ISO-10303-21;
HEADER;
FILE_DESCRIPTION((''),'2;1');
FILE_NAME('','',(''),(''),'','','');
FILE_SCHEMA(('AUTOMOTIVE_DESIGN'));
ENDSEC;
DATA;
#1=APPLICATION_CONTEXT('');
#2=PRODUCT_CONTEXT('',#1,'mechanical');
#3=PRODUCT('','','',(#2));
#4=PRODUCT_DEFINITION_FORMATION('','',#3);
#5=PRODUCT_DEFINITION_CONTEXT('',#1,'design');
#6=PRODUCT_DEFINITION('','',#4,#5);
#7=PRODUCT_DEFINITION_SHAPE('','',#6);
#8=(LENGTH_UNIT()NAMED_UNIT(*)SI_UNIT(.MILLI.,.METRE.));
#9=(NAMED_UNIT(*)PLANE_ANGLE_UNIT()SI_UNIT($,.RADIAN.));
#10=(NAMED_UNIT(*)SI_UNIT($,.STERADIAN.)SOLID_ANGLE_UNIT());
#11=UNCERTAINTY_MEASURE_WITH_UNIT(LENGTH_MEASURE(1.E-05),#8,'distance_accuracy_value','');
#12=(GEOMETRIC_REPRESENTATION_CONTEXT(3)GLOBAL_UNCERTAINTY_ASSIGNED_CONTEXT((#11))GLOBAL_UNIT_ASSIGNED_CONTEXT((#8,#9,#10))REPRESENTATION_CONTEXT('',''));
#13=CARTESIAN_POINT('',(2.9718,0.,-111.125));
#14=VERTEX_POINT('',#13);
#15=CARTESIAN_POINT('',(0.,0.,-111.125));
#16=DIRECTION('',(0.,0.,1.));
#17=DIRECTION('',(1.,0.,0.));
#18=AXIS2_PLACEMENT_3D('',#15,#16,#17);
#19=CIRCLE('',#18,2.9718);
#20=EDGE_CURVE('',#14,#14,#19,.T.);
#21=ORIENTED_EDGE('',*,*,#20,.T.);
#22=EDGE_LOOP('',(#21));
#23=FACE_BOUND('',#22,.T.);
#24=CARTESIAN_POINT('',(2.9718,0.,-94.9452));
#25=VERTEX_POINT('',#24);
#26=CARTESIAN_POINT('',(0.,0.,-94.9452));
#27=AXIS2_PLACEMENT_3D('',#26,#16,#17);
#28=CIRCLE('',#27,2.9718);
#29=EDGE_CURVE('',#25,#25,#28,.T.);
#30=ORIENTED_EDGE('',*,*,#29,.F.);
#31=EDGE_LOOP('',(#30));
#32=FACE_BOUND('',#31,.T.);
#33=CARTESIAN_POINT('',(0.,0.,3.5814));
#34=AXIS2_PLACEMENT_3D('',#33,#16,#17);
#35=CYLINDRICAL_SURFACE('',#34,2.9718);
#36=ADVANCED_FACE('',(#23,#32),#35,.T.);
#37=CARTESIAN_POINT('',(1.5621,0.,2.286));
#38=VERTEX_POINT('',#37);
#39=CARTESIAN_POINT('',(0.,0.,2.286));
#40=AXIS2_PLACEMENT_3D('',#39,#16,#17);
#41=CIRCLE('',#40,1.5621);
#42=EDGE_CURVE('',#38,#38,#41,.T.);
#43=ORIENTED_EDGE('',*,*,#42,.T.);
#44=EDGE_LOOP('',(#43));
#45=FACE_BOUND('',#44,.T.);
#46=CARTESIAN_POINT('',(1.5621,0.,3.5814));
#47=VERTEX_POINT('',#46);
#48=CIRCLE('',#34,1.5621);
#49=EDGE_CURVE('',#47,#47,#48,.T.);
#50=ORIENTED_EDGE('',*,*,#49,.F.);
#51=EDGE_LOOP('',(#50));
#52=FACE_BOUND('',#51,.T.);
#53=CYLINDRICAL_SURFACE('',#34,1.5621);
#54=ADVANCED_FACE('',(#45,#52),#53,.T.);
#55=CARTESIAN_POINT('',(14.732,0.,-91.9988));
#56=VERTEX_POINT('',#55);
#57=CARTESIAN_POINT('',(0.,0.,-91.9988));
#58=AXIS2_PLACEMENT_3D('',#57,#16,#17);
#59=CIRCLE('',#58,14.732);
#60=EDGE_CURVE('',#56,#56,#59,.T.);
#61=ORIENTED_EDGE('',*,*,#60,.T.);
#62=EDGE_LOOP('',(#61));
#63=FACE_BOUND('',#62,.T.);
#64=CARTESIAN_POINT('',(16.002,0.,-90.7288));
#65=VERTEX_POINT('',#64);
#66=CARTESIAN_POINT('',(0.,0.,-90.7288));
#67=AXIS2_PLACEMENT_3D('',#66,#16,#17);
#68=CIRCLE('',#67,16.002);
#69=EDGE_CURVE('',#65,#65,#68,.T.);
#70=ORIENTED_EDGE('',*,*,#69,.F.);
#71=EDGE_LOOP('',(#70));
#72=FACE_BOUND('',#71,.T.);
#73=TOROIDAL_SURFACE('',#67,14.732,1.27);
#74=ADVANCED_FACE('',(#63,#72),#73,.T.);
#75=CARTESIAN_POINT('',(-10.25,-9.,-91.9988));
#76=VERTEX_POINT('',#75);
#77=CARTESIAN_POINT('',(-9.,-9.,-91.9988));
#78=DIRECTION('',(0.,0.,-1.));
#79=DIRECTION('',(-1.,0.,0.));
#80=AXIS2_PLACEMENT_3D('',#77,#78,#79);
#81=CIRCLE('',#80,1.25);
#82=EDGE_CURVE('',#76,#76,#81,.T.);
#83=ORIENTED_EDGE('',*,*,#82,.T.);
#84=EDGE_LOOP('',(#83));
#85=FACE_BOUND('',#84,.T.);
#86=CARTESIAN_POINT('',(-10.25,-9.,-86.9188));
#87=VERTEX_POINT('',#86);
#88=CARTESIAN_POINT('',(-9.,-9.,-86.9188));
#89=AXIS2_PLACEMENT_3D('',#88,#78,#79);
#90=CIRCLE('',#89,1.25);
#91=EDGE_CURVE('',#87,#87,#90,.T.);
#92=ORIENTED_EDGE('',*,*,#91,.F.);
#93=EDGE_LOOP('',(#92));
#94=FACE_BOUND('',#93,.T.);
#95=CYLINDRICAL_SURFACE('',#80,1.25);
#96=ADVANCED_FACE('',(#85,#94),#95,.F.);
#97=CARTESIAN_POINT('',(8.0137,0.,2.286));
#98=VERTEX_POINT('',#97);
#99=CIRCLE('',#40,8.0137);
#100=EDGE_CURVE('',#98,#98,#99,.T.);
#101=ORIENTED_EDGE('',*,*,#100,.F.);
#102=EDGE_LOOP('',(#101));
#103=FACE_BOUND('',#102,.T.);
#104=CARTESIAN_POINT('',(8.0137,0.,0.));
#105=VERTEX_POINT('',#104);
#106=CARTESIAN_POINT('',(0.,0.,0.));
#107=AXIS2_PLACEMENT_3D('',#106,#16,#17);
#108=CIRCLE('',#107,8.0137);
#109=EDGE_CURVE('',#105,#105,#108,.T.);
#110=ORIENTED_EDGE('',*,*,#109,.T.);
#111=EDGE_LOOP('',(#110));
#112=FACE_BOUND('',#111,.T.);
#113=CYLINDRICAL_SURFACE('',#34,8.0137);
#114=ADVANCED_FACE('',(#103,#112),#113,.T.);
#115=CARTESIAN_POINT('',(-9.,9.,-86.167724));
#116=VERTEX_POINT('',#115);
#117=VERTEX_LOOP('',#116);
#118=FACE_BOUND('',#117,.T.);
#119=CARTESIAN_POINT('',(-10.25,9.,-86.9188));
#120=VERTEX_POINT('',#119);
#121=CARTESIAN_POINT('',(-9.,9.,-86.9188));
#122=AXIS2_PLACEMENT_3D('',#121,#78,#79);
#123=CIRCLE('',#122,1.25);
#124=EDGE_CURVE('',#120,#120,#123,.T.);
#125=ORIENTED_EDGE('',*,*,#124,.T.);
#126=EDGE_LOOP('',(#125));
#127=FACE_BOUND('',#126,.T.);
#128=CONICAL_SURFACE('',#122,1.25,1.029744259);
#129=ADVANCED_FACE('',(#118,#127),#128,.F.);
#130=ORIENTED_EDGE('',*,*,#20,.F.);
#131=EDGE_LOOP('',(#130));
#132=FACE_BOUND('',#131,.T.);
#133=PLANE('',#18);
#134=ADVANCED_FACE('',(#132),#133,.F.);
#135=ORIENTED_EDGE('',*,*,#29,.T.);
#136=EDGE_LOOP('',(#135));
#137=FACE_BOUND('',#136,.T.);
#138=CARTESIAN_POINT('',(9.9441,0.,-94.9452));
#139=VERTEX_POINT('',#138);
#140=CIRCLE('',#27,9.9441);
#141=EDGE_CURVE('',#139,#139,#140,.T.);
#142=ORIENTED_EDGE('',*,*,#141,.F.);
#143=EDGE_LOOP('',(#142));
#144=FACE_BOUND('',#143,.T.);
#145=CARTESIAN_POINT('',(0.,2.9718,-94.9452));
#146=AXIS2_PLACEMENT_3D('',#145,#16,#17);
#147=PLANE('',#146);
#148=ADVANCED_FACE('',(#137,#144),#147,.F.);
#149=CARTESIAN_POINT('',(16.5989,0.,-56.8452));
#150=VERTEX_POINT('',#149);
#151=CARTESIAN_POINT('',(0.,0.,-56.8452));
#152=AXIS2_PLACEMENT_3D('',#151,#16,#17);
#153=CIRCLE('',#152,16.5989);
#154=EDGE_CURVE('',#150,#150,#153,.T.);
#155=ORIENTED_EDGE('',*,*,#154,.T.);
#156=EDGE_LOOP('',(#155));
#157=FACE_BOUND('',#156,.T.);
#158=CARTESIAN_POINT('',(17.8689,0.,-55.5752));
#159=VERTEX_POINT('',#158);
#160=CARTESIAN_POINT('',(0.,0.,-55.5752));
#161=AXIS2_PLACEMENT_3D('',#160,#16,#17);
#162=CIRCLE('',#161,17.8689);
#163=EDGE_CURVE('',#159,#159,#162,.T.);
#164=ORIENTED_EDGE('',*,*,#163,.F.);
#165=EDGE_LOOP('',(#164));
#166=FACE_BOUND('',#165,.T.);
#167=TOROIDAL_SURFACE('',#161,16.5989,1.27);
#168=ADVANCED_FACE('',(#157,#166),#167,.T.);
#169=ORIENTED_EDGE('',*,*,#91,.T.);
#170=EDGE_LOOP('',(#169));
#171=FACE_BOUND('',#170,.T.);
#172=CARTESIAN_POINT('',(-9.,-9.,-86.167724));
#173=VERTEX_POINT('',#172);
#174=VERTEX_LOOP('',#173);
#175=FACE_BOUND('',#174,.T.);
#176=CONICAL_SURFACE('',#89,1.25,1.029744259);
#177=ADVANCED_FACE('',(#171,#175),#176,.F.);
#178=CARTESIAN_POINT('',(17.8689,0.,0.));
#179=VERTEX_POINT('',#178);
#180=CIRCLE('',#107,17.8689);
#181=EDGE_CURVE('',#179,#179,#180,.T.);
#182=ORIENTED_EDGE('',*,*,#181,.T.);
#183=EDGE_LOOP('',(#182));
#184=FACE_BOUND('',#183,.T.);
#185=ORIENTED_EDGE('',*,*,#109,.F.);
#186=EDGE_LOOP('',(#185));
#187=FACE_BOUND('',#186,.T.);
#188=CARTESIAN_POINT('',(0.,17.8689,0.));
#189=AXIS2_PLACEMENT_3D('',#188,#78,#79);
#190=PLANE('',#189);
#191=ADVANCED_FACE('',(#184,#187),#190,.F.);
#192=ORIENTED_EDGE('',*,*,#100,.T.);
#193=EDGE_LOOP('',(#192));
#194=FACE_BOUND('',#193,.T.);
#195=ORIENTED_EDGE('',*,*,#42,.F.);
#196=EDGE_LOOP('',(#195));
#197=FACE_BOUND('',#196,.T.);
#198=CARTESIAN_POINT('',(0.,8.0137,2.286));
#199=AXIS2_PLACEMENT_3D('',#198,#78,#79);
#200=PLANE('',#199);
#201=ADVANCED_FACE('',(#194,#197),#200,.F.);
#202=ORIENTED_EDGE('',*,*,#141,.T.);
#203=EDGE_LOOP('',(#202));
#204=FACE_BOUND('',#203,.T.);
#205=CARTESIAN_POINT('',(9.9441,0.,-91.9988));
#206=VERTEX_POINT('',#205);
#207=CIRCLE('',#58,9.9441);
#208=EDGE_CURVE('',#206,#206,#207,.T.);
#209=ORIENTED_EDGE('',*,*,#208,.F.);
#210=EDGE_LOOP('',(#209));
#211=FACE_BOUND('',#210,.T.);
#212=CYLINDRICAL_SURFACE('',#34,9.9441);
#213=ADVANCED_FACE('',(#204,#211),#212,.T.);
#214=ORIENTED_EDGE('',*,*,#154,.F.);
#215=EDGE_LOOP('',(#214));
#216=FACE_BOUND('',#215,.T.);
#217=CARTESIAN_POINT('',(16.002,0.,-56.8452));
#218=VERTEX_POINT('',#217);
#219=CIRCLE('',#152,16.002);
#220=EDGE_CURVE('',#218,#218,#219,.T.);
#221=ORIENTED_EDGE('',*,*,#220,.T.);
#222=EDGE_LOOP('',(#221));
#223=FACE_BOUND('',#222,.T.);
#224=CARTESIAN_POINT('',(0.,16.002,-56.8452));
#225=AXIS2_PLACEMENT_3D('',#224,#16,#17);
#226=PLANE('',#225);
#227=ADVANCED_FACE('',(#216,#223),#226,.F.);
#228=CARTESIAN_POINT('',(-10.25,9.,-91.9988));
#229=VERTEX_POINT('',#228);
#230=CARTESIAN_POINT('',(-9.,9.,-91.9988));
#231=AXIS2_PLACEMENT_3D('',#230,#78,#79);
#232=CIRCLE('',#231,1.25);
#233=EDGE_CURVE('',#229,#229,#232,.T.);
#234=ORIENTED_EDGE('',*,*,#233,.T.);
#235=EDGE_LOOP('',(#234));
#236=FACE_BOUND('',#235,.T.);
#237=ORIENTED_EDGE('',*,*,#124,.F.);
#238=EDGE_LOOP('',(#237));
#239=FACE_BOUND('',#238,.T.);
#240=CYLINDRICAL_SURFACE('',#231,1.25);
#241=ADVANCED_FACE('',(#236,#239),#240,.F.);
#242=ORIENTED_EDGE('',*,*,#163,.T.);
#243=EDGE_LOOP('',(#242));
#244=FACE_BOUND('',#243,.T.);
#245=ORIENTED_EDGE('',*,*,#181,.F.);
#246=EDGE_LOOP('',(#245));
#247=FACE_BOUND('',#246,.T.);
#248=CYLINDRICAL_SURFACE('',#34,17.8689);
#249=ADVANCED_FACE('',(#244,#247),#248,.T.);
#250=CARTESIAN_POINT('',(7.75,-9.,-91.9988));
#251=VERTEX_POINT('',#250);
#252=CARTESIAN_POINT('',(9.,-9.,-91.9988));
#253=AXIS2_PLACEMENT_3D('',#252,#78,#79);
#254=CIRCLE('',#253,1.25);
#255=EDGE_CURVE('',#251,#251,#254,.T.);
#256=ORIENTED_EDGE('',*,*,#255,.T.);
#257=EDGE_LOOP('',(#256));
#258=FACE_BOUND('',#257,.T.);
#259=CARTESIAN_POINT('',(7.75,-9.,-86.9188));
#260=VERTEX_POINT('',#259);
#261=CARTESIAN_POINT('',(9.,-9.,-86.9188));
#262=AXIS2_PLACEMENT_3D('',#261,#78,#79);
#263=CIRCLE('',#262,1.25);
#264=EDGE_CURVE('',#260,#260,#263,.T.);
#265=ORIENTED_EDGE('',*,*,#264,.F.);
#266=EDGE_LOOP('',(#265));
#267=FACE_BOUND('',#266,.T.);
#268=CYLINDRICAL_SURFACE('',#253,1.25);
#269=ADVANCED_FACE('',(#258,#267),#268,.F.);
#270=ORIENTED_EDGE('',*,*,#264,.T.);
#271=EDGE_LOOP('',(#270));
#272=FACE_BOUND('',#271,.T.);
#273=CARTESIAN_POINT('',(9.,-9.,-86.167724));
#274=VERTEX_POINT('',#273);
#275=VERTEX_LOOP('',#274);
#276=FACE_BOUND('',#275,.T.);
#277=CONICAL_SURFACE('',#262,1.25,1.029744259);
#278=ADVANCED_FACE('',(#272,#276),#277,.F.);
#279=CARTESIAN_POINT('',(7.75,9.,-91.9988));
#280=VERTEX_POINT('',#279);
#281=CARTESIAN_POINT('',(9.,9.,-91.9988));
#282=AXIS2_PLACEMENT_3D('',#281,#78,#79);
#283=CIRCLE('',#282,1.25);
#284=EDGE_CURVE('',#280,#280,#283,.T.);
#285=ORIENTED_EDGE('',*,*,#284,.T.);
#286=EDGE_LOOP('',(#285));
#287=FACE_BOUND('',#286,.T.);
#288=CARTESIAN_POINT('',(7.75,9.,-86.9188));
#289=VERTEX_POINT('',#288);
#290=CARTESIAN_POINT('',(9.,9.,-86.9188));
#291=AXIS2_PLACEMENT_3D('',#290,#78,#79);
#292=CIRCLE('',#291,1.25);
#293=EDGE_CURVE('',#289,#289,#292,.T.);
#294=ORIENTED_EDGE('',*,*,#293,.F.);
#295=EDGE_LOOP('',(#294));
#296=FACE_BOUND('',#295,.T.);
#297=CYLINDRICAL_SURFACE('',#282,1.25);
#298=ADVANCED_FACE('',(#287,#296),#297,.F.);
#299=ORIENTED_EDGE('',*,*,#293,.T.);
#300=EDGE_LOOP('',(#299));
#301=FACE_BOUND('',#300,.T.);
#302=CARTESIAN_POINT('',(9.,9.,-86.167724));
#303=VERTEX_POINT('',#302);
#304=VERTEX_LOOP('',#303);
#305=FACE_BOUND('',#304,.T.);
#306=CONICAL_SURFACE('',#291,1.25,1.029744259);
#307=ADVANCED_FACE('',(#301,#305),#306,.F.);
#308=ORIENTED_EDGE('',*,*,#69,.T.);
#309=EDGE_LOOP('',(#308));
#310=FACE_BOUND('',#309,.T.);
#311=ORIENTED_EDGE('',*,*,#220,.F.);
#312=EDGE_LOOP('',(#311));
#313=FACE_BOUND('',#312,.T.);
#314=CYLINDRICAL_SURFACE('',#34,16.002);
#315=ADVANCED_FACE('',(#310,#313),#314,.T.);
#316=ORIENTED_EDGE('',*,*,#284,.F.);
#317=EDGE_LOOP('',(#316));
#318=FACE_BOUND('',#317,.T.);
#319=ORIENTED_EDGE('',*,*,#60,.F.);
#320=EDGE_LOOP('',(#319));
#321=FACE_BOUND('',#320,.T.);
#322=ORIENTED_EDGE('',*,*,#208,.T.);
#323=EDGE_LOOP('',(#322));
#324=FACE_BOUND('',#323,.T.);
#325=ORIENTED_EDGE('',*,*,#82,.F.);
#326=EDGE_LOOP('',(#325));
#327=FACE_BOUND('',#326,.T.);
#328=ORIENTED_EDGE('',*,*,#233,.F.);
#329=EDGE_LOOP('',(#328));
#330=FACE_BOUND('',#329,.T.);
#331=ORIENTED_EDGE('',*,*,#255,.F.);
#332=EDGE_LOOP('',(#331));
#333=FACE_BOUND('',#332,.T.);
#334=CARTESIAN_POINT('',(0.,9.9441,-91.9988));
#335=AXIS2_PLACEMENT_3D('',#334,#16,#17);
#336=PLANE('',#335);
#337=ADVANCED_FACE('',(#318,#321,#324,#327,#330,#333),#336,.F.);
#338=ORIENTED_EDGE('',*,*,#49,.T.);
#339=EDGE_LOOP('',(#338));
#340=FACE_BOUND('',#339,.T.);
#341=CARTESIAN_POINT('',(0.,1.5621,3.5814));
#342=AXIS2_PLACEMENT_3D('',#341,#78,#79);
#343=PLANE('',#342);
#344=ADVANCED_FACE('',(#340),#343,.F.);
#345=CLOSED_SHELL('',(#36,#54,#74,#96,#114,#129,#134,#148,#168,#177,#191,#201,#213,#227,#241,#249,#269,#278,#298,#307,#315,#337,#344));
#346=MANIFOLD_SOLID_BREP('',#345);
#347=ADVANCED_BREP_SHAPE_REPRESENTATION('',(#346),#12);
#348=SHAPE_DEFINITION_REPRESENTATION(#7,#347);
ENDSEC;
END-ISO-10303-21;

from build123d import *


# Read off the part's stored shape, not the designer's step: M3x0.5 Tapped Hole1
with BuildPart() as part:
    # Sketch1 → Revolve1 (revolve)
    with BuildSketch(Plane(origin=(0, 0, 0), x_dir=(0, 0, -1), z_dir=(1, 0, 0)), mode=Mode.PRIVATE) as revolve1_sk:
        with BuildLine():
            Line((111.125, 0), (111.125, 2.9718))
            Line((111.125, 2.9718), (94.9452, 2.9718))
            Line((94.9452, 2.9718), (94.9452, 9.9441))
            Line((94.9452, 9.9441), (91.9988, 9.9441))
            Line((91.9988, 9.9441), (91.9988, 14.732))
            ThreePointArc((91.9988, 14.732), (91.626825612, 15.630025612), (90.7288, 16.002))
            Line((90.7288, 16.002), (56.8452, 16.002))
            Line((56.8452, 16.002), (56.8452, 16.5989))
            ThreePointArc((56.8452, 16.5989), (56.473225612, 17.496925612), (55.5752, 17.8689))
            Line((55.5752, 17.8689), (0, 17.8689))
            Line((0, 17.8689), (0, 8.0137))
            Line((0, 8.0137), (-2.286, 8.0137))
            Line((-2.286, 8.0137), (-2.286, 1.5621))
            Line((-2.286, 1.5621), (-3.5814, 1.5621))
            Line((-3.5814, 1.5621), (-3.5814, 0))
            Line((-3.5814, 0), (111.125, 0))
        make_face()
    revolve(revolve1_sk.sketch.rotate(Axis((0, 0, 3.5814), (0, 0, -1)), 90), axis=Axis((0, 0, 3.5814), (0, 0, -1)))

    # M3x0.5 Tapped Hole1 outline → M3x0.5 Tapped Hole1 (revolve, cut)
    with BuildSketch(Plane(origin=(-9, -9, 0), x_dir=(1, 0, 0), z_dir=(0, -1, 0))):
        Polygon((1.25, -86.9188), (0, -86.167724226), (0, -91.9988), (1.25, -91.9988), align=None)
    revolve(axis=Axis((-9, -9, 0), (0, 0, 1)), mode=Mode.SUBTRACT)

    # M3x0.5 Tapped Hole1 2 outline → M3x0.5 Tapped Hole1 2 (revolve, cut)
    with BuildSketch(Plane(origin=(9, 9, 0), x_dir=(1, 0, 0), z_dir=(0, -1, 0))):
        Polygon((1.25, -86.9188), (0, -86.167724226), (0, -91.9988), (1.25, -91.9988), align=None)
    revolve(axis=Axis((9, 9, 0), (0, 0, 1)), mode=Mode.SUBTRACT)

    # M3x0.5 Tapped Hole1 3 outline → M3x0.5 Tapped Hole1 3 (revolve, cut)
    with BuildSketch(Plane(origin=(9, -9, 0), x_dir=(1, 0, 0), z_dir=(0, -1, 0))):
        Polygon((1.25, -86.9188), (0, -86.167724226), (0, -91.9988), (1.25, -91.9988), align=None)
    revolve(axis=Axis((9, -9, 0), (0, 0, 1)), mode=Mode.SUBTRACT)

    # M3x0.5 Tapped Hole1 4 outline → M3x0.5 Tapped Hole1 4 (revolve, cut)
    with BuildSketch(Plane(origin=(-9, 9, 0), x_dir=(1, 0, 0), z_dir=(0, -1, 0))):
        Polygon((1.25, -86.9188), (0, -86.167724226), (0, -91.9988), (1.25, -91.9988), align=None)
    revolve(axis=Axis((-9, 9, 0), (0, 0, 1)), mode=Mode.SUBTRACT)


solid = part.part
